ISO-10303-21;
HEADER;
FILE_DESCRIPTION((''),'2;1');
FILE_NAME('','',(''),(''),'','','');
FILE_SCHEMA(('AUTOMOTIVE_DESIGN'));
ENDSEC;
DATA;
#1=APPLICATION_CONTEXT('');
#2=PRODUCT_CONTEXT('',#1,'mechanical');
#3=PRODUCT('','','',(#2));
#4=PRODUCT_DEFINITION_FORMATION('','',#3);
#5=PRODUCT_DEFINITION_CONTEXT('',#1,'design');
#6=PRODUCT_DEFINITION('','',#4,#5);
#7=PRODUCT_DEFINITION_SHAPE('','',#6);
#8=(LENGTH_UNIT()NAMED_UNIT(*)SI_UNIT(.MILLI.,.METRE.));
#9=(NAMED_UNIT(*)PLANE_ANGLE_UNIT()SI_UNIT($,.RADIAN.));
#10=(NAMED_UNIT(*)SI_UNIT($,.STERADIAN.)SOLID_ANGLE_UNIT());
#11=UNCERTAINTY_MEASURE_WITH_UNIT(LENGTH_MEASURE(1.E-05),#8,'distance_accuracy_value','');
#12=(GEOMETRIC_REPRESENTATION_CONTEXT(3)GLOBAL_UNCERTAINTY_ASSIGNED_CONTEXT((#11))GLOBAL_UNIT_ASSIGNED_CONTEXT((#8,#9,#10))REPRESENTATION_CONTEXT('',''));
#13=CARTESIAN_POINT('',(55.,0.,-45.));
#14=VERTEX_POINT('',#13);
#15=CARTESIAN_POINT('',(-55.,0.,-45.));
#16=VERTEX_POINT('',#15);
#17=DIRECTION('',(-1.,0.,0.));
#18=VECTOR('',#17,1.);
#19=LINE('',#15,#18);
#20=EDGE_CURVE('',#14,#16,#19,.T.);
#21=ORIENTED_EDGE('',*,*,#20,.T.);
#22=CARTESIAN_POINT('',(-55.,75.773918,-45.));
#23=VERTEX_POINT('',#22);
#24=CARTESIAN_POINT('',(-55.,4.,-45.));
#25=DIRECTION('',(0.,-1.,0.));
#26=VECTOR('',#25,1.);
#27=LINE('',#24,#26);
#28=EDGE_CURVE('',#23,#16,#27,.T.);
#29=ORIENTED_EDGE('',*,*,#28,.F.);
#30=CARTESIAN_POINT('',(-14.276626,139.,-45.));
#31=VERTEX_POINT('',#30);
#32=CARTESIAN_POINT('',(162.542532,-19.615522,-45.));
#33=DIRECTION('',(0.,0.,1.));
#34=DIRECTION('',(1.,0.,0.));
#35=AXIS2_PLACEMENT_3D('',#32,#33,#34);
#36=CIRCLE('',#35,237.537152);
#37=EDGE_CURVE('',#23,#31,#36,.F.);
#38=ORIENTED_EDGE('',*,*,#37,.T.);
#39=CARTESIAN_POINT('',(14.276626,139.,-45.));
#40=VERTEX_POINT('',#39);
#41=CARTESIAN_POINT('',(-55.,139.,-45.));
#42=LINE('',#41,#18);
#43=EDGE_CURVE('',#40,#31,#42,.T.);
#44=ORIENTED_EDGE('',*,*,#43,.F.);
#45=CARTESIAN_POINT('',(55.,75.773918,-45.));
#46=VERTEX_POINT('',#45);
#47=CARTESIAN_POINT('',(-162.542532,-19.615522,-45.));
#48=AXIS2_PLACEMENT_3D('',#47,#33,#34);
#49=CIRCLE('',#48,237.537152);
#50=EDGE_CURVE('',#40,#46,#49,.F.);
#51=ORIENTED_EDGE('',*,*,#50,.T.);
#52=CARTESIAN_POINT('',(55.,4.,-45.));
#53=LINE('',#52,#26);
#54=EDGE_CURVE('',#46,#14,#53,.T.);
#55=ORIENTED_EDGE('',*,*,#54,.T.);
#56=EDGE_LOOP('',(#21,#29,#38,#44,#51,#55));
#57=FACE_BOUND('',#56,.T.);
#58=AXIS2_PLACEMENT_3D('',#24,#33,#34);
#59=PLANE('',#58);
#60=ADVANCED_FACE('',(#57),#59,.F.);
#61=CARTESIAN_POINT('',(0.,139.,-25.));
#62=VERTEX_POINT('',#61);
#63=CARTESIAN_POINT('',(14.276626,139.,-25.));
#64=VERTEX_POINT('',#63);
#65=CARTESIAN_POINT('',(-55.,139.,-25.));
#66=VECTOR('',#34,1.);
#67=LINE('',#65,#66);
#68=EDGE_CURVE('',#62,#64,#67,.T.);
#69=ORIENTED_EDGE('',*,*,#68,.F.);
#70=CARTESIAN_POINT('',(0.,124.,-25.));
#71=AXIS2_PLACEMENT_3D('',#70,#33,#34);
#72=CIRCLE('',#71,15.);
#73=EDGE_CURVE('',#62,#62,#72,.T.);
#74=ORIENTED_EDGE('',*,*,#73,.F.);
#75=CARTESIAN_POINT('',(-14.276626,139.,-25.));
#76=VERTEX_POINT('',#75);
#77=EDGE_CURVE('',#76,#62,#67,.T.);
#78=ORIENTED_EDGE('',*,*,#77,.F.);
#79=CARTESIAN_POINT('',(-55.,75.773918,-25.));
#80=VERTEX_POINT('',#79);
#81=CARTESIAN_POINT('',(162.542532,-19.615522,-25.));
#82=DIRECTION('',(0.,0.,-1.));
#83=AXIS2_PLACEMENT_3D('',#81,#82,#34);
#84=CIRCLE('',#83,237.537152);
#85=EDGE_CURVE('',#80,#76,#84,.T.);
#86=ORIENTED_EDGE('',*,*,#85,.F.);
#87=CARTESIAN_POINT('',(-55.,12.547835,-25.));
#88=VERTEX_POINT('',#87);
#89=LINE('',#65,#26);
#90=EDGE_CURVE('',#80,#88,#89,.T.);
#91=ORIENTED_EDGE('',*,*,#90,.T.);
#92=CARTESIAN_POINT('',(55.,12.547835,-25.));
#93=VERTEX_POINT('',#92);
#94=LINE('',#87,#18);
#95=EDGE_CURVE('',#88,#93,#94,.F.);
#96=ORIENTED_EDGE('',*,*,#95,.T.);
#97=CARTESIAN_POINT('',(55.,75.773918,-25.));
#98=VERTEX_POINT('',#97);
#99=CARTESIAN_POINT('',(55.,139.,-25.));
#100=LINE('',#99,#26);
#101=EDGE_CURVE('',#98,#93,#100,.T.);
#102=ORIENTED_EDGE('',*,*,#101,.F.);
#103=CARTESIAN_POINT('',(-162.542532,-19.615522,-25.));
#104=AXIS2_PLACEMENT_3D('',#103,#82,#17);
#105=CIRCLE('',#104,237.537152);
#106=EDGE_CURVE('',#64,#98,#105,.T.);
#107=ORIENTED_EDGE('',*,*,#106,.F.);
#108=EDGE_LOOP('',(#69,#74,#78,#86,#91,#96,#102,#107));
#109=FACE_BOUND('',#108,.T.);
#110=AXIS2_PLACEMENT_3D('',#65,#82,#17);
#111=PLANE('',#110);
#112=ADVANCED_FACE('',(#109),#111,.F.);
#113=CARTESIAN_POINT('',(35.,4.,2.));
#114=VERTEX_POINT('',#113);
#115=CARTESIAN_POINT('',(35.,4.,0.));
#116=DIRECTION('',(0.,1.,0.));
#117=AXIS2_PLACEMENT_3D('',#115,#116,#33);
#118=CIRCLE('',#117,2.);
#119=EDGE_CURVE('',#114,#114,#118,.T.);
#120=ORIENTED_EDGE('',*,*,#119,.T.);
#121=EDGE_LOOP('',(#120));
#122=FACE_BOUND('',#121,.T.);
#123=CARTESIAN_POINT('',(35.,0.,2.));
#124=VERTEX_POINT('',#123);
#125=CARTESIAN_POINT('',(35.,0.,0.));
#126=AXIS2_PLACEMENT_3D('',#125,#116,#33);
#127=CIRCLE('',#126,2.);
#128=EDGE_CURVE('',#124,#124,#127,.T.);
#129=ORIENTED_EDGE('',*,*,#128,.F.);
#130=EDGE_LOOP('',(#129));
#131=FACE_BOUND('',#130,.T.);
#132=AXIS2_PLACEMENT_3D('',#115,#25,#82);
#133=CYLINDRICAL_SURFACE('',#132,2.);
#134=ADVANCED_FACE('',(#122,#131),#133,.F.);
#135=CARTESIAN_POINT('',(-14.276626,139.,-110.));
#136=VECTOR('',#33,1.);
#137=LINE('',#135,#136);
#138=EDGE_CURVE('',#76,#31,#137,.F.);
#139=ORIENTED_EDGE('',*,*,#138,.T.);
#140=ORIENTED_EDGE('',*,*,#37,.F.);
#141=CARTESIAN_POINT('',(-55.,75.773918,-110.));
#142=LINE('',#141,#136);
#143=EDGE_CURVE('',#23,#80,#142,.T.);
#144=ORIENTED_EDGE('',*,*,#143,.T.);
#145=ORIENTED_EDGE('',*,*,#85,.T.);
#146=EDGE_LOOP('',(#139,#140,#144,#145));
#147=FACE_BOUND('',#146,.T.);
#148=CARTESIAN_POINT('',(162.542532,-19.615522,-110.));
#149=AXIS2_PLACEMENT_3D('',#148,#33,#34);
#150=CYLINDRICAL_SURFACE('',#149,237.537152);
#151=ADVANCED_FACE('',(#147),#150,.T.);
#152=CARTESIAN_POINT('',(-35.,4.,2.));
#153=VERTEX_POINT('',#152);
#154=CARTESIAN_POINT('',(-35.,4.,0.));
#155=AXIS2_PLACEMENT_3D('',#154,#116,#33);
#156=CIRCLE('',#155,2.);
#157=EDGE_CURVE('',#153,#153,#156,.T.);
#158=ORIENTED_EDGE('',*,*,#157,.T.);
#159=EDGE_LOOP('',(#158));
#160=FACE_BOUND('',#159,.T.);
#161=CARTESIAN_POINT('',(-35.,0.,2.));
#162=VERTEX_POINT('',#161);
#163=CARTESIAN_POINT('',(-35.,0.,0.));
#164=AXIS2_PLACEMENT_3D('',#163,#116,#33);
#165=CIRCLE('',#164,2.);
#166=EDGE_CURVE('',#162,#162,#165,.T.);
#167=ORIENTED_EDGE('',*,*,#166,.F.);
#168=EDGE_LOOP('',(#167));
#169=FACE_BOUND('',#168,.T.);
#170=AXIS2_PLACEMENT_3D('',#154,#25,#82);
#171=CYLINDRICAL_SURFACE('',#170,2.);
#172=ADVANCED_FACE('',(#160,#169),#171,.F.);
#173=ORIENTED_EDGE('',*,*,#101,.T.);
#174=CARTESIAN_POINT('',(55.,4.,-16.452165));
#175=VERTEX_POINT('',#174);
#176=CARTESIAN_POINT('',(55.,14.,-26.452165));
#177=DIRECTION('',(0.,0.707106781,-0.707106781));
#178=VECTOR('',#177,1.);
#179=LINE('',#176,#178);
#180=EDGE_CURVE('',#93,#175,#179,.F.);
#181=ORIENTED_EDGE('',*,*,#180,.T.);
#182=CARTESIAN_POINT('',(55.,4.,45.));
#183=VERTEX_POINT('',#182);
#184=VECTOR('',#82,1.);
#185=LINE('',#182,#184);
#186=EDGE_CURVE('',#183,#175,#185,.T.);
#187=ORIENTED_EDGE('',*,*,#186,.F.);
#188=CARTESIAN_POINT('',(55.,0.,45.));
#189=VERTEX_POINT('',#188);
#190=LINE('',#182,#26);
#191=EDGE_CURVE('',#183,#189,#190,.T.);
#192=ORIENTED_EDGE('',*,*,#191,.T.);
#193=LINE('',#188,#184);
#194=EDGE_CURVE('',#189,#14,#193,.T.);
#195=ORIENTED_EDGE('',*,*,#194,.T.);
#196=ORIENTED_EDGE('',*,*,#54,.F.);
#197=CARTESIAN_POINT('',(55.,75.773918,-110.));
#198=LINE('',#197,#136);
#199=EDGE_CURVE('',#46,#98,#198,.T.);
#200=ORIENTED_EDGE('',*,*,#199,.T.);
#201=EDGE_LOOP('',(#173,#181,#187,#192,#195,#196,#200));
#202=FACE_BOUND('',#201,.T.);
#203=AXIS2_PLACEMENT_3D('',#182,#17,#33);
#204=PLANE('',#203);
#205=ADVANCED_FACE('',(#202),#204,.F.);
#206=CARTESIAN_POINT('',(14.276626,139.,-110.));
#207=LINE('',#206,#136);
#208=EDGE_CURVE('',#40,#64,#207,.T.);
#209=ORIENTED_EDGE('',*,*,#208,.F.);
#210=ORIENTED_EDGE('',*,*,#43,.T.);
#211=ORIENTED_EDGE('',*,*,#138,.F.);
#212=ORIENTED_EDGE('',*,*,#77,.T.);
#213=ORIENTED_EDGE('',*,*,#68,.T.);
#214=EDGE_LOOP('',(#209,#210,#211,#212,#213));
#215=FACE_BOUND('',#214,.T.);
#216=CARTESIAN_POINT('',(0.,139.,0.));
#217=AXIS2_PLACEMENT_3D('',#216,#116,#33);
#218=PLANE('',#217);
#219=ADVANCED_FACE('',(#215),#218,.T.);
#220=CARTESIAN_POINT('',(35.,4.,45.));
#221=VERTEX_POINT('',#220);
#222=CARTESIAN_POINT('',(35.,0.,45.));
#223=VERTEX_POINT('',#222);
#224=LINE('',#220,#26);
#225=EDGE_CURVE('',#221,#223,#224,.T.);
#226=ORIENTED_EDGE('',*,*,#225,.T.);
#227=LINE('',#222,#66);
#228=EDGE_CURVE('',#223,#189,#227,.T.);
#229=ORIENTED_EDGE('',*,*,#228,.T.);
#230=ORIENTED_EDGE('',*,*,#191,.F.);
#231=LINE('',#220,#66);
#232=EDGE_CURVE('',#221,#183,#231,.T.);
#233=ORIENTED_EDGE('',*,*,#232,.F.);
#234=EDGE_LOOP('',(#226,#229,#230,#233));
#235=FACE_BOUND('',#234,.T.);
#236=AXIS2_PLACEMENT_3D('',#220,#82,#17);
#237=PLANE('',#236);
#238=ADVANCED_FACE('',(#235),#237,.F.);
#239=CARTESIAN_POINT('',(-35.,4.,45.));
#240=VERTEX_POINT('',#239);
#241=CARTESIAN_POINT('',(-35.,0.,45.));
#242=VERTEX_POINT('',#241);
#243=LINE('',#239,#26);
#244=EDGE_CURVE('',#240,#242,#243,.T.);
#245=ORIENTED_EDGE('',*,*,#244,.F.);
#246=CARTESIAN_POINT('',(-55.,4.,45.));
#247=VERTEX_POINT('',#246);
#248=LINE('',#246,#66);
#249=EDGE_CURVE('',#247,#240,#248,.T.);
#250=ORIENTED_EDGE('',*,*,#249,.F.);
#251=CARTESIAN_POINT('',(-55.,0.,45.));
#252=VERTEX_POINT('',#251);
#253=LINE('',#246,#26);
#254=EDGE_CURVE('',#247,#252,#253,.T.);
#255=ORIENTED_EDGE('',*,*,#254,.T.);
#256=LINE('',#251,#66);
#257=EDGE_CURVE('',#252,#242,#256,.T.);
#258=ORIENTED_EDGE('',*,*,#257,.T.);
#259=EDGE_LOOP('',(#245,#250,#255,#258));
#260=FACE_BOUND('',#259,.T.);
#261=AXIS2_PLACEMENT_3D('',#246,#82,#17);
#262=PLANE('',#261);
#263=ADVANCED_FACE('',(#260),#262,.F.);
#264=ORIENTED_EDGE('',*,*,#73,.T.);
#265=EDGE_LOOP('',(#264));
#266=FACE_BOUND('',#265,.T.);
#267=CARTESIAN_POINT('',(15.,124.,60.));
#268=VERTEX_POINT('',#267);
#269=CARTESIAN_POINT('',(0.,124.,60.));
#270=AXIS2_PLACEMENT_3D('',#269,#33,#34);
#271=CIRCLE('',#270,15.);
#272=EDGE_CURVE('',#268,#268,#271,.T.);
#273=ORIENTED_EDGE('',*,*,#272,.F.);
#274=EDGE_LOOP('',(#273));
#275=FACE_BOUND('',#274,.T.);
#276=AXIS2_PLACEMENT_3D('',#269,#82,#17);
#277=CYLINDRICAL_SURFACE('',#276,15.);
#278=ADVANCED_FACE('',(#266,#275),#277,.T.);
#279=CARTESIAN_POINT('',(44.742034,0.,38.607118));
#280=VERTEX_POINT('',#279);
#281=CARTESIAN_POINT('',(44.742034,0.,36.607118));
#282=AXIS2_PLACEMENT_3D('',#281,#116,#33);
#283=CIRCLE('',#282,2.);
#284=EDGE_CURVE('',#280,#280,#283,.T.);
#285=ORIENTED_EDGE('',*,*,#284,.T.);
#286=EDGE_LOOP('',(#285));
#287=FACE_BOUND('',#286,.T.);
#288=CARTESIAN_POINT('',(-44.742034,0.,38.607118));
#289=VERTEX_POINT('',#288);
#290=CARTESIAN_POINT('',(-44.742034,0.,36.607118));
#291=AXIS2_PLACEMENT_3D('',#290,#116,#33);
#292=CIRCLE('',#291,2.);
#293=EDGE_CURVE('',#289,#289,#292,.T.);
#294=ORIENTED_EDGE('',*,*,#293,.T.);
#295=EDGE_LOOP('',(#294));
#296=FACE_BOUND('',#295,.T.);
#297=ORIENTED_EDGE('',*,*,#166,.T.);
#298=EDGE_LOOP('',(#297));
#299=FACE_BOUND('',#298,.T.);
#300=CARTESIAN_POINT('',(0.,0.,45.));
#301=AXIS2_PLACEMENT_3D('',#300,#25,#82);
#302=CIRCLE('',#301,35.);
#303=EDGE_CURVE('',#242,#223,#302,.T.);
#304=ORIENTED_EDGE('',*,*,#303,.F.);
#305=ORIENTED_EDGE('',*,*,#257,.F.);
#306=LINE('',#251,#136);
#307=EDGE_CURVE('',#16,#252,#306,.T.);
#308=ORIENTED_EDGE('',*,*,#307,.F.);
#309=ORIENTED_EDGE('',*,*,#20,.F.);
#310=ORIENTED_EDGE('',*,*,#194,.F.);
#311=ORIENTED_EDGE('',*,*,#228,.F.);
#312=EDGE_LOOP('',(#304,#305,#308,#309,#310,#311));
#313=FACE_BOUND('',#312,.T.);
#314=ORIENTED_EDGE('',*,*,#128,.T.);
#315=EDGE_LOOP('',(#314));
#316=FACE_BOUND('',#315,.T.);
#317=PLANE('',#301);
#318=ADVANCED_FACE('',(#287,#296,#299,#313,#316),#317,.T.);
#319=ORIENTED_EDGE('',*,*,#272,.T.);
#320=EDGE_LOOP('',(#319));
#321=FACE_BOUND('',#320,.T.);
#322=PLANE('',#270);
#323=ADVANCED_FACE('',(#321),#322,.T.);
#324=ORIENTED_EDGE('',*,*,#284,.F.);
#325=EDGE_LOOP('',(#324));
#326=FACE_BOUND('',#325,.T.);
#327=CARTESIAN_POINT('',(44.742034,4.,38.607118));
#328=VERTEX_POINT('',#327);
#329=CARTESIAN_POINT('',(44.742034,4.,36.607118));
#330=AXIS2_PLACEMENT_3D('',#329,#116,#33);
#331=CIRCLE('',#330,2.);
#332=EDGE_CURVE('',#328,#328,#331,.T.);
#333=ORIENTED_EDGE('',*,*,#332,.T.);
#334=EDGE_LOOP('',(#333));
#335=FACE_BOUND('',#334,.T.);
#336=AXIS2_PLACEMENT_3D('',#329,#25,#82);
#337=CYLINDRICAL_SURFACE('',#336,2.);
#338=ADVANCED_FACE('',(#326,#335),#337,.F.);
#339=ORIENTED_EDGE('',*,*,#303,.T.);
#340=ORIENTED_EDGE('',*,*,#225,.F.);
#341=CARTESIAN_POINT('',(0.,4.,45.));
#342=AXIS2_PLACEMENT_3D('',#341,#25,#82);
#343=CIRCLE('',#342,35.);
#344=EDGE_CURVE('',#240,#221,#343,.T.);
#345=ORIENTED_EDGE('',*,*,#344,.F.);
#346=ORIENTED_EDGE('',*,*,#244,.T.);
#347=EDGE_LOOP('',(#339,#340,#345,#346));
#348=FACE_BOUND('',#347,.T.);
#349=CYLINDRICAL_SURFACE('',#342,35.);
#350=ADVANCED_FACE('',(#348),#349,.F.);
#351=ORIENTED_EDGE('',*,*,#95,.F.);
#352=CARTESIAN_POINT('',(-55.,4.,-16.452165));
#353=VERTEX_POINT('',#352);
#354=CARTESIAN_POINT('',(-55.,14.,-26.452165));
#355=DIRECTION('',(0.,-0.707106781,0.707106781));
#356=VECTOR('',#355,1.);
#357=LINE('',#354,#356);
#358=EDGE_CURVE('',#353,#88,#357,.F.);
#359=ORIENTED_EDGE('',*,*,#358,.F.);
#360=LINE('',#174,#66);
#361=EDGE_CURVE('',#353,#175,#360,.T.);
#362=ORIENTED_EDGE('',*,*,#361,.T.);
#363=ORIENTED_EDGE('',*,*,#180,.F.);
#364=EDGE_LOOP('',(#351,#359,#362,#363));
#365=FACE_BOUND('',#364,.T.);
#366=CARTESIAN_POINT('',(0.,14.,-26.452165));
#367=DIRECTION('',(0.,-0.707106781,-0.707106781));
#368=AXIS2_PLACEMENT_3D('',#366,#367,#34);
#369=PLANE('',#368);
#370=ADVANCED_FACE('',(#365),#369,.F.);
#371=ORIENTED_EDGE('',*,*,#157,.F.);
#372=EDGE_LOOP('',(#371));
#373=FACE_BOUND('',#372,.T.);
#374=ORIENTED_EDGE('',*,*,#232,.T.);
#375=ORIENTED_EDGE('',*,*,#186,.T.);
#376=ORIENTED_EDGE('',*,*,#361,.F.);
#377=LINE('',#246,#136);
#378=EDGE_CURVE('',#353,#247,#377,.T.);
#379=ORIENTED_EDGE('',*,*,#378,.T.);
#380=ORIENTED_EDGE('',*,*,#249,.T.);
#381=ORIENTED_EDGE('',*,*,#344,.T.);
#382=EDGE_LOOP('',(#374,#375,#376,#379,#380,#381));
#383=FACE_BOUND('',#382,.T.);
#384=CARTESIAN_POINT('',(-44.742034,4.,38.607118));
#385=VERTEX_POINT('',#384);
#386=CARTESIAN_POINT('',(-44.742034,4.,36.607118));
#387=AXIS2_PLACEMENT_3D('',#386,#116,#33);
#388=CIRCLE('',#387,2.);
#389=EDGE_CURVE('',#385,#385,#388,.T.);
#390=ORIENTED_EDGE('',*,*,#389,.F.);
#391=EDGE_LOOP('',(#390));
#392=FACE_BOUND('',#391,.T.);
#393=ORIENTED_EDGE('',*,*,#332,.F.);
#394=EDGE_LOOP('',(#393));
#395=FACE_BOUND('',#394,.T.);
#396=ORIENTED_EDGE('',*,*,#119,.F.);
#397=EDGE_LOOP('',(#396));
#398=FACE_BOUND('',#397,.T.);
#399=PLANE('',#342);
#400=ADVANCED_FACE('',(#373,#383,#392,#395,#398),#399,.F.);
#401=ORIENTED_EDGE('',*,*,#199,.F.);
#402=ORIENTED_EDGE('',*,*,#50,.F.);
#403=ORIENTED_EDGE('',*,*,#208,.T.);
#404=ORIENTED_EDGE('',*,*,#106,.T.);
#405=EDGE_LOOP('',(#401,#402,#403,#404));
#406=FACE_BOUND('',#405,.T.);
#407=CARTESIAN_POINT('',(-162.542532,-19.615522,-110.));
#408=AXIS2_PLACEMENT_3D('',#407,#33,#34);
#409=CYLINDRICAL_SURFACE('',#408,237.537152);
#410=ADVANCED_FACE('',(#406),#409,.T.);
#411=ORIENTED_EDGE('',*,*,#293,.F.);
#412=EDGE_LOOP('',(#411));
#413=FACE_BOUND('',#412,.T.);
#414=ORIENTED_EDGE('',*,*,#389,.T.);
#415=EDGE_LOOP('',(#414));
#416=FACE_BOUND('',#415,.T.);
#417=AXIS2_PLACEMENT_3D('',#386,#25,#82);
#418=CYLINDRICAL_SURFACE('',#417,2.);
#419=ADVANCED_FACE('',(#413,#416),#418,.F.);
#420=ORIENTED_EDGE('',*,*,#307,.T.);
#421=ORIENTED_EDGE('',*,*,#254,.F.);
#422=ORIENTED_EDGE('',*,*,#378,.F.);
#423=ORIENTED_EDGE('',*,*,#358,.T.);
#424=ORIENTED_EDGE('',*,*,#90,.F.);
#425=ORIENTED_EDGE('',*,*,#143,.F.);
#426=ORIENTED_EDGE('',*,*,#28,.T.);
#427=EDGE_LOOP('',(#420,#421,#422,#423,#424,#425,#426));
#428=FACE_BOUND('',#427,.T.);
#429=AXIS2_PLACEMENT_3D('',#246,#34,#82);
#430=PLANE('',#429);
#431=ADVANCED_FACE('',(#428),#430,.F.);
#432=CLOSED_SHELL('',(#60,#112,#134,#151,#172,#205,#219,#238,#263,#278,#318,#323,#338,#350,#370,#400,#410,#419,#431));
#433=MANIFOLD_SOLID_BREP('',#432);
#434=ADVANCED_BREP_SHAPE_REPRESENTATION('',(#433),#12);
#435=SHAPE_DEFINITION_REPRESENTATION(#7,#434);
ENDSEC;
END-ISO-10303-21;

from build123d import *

# Parameters (mm, degrees)
SKETCH1_R           = 2
BOSS_EXTRUDE1_DEPTH = 4
SKETCH2_W           = 110
SKETCH2_H           = 20
BOSS_EXTRUDE2_DEPTH = 135
SKETCH3_W           = 110
SKETCH3_H           = 8.547835338
BOSS_EXTRUDE3_DEPTH = 10
CHAMFER1_SIZE       = 10
SKETCH4_R           = 15
BOSS_EXTRUDE4_DEPTH = 85
CUT_EXTRUDE1_DEPTH  = 85


with BuildPart() as part:
    # Sketch1 → Boss-Extrude1 (new body)
    with BuildSketch(Plane(origin=(0, 0, 0), x_dir=(1, 0, 0), z_dir=(0, 1, 0))):
        with BuildLine():
            Line((35, -45), (55, -45))
            Line((55, -45), (55, 45))
            Line((55, 45), (-55, 45))
            Line((-55, 45), (-55, -45))
            Line((-55, -45), (-35, -45))
            ThreePointArc((-35, -45), (0, -10), (35, -45))
        make_face()
        with Locations(Location((-35, 0, 0), (0, 0, 270))):
            Circle(SKETCH1_R, mode=Mode.SUBTRACT)
        with Locations(Location((35, 0, 0), (0, 0, 270))):
            Circle(SKETCH1_R, mode=Mode.SUBTRACT)
        with Locations(Location((-44.742033595, -36.607118396, 0), (0, 0, 270))):
            Circle(SKETCH1_R, mode=Mode.SUBTRACT)
        with Locations(Location((44.742033595, -36.607118396, 0), (0, 0, 270))):
            Circle(SKETCH1_R, mode=Mode.SUBTRACT)
    extrude(amount=BOSS_EXTRUDE1_DEPTH)



with BuildPart() as body_2:
    # Sketch2 → Boss-Extrude2 (new body)
    with BuildSketch(Plane(origin=(0, 4, 0), x_dir=(1, 0, 0), z_dir=(0, 1, 0))):
        with Locations((0, 35)):
            Rectangle(SKETCH2_W, SKETCH2_H)
    extrude(amount=BOSS_EXTRUDE2_DEPTH)


with BuildPart() as part_1:
    add(part.part)

    add(body_2.part)  # Boss-Extrude3 merges body 2
    # Sketch3 → Boss-Extrude3 (add)
    with BuildSketch(Plane(origin=(0, 4, 0), x_dir=(1, 0, 0), z_dir=(0, 1, 0))):
        with Locations((0, 20.726082331)):
            Rectangle(SKETCH3_W, SKETCH3_H)
    extrude(amount=BOSS_EXTRUDE3_DEPTH)

    # Chamfer1
    # the kernel refuses this chamfer: 10 mm, written as the material it takes off along each edge
    with BuildSketch(Plane(origin=(-80.71682988, 14, -16.452164662), x_dir=(0, -0.9996219169112968, 0.027495876610586317), z_dir=(1, 0, 0))) as chamfer1_piece_1_section:
        Polygon((CHAMFER1_SIZE * 0.999621916911, CHAMFER1_SIZE * 0.0274958766106), (-CHAMFER1_SIZE * 0.0274958766106, CHAMFER1_SIZE * 0.999621916911), (0, 0), align=None)
    chamfer1_piece_1 = extrude(amount=161.433659759, mode=Mode.PRIVATE)
    chamfer1_piece_1 = split(chamfer1_piece_1, bisect_by=Plane(origin=(0, 4, -19.564208601), z_dir=(0, 1, 0)), keep=Keep.TOP, mode=Mode.PRIVATE)
    chamfer1_piece_1 = split(chamfer1_piece_1, bisect_by=Plane(origin=(0, 10.613146748, -25), z_dir=(0, 0, 1)), keep=Keep.TOP, mode=Mode.PRIVATE)
    add(chamfer1_piece_1, mode=Mode.SUBTRACT)

    # Sketch4 → Boss-Extrude4 (add)
    with BuildSketch(Plane.XY.offset(-25)):
        with Locations(Location((0, 124, 0), (0, 0, 90))):
            Circle(SKETCH4_R)
    extrude(amount=BOSS_EXTRUDE4_DEPTH)

    # Sketch5 → Cut-Extrude1 (cut)
    with BuildSketch(Plane.XY.offset(-25)):
        with BuildLine():
            Line((-55, 139), (-55, 75.773917669))
            ThreePointArc((-55, 75.773917669), (-37.156416489, 109.008847521), (-14.276626111, 139))
            Line((-14.276626111, 139), (-55, 139))
        make_face()
        with BuildLine():
            Line((55, 139), (55, 75.773917669))
            ThreePointArc((55, 75.773917669), (37.156416489, 109.008847521), (14.276626111, 139))
            Line((14.276626111, 139), (55, 139))
        make_face()
    extrude(amount=-CUT_EXTRUDE1_DEPTH, mode=Mode.SUBTRACT)


solid = part_1.part
